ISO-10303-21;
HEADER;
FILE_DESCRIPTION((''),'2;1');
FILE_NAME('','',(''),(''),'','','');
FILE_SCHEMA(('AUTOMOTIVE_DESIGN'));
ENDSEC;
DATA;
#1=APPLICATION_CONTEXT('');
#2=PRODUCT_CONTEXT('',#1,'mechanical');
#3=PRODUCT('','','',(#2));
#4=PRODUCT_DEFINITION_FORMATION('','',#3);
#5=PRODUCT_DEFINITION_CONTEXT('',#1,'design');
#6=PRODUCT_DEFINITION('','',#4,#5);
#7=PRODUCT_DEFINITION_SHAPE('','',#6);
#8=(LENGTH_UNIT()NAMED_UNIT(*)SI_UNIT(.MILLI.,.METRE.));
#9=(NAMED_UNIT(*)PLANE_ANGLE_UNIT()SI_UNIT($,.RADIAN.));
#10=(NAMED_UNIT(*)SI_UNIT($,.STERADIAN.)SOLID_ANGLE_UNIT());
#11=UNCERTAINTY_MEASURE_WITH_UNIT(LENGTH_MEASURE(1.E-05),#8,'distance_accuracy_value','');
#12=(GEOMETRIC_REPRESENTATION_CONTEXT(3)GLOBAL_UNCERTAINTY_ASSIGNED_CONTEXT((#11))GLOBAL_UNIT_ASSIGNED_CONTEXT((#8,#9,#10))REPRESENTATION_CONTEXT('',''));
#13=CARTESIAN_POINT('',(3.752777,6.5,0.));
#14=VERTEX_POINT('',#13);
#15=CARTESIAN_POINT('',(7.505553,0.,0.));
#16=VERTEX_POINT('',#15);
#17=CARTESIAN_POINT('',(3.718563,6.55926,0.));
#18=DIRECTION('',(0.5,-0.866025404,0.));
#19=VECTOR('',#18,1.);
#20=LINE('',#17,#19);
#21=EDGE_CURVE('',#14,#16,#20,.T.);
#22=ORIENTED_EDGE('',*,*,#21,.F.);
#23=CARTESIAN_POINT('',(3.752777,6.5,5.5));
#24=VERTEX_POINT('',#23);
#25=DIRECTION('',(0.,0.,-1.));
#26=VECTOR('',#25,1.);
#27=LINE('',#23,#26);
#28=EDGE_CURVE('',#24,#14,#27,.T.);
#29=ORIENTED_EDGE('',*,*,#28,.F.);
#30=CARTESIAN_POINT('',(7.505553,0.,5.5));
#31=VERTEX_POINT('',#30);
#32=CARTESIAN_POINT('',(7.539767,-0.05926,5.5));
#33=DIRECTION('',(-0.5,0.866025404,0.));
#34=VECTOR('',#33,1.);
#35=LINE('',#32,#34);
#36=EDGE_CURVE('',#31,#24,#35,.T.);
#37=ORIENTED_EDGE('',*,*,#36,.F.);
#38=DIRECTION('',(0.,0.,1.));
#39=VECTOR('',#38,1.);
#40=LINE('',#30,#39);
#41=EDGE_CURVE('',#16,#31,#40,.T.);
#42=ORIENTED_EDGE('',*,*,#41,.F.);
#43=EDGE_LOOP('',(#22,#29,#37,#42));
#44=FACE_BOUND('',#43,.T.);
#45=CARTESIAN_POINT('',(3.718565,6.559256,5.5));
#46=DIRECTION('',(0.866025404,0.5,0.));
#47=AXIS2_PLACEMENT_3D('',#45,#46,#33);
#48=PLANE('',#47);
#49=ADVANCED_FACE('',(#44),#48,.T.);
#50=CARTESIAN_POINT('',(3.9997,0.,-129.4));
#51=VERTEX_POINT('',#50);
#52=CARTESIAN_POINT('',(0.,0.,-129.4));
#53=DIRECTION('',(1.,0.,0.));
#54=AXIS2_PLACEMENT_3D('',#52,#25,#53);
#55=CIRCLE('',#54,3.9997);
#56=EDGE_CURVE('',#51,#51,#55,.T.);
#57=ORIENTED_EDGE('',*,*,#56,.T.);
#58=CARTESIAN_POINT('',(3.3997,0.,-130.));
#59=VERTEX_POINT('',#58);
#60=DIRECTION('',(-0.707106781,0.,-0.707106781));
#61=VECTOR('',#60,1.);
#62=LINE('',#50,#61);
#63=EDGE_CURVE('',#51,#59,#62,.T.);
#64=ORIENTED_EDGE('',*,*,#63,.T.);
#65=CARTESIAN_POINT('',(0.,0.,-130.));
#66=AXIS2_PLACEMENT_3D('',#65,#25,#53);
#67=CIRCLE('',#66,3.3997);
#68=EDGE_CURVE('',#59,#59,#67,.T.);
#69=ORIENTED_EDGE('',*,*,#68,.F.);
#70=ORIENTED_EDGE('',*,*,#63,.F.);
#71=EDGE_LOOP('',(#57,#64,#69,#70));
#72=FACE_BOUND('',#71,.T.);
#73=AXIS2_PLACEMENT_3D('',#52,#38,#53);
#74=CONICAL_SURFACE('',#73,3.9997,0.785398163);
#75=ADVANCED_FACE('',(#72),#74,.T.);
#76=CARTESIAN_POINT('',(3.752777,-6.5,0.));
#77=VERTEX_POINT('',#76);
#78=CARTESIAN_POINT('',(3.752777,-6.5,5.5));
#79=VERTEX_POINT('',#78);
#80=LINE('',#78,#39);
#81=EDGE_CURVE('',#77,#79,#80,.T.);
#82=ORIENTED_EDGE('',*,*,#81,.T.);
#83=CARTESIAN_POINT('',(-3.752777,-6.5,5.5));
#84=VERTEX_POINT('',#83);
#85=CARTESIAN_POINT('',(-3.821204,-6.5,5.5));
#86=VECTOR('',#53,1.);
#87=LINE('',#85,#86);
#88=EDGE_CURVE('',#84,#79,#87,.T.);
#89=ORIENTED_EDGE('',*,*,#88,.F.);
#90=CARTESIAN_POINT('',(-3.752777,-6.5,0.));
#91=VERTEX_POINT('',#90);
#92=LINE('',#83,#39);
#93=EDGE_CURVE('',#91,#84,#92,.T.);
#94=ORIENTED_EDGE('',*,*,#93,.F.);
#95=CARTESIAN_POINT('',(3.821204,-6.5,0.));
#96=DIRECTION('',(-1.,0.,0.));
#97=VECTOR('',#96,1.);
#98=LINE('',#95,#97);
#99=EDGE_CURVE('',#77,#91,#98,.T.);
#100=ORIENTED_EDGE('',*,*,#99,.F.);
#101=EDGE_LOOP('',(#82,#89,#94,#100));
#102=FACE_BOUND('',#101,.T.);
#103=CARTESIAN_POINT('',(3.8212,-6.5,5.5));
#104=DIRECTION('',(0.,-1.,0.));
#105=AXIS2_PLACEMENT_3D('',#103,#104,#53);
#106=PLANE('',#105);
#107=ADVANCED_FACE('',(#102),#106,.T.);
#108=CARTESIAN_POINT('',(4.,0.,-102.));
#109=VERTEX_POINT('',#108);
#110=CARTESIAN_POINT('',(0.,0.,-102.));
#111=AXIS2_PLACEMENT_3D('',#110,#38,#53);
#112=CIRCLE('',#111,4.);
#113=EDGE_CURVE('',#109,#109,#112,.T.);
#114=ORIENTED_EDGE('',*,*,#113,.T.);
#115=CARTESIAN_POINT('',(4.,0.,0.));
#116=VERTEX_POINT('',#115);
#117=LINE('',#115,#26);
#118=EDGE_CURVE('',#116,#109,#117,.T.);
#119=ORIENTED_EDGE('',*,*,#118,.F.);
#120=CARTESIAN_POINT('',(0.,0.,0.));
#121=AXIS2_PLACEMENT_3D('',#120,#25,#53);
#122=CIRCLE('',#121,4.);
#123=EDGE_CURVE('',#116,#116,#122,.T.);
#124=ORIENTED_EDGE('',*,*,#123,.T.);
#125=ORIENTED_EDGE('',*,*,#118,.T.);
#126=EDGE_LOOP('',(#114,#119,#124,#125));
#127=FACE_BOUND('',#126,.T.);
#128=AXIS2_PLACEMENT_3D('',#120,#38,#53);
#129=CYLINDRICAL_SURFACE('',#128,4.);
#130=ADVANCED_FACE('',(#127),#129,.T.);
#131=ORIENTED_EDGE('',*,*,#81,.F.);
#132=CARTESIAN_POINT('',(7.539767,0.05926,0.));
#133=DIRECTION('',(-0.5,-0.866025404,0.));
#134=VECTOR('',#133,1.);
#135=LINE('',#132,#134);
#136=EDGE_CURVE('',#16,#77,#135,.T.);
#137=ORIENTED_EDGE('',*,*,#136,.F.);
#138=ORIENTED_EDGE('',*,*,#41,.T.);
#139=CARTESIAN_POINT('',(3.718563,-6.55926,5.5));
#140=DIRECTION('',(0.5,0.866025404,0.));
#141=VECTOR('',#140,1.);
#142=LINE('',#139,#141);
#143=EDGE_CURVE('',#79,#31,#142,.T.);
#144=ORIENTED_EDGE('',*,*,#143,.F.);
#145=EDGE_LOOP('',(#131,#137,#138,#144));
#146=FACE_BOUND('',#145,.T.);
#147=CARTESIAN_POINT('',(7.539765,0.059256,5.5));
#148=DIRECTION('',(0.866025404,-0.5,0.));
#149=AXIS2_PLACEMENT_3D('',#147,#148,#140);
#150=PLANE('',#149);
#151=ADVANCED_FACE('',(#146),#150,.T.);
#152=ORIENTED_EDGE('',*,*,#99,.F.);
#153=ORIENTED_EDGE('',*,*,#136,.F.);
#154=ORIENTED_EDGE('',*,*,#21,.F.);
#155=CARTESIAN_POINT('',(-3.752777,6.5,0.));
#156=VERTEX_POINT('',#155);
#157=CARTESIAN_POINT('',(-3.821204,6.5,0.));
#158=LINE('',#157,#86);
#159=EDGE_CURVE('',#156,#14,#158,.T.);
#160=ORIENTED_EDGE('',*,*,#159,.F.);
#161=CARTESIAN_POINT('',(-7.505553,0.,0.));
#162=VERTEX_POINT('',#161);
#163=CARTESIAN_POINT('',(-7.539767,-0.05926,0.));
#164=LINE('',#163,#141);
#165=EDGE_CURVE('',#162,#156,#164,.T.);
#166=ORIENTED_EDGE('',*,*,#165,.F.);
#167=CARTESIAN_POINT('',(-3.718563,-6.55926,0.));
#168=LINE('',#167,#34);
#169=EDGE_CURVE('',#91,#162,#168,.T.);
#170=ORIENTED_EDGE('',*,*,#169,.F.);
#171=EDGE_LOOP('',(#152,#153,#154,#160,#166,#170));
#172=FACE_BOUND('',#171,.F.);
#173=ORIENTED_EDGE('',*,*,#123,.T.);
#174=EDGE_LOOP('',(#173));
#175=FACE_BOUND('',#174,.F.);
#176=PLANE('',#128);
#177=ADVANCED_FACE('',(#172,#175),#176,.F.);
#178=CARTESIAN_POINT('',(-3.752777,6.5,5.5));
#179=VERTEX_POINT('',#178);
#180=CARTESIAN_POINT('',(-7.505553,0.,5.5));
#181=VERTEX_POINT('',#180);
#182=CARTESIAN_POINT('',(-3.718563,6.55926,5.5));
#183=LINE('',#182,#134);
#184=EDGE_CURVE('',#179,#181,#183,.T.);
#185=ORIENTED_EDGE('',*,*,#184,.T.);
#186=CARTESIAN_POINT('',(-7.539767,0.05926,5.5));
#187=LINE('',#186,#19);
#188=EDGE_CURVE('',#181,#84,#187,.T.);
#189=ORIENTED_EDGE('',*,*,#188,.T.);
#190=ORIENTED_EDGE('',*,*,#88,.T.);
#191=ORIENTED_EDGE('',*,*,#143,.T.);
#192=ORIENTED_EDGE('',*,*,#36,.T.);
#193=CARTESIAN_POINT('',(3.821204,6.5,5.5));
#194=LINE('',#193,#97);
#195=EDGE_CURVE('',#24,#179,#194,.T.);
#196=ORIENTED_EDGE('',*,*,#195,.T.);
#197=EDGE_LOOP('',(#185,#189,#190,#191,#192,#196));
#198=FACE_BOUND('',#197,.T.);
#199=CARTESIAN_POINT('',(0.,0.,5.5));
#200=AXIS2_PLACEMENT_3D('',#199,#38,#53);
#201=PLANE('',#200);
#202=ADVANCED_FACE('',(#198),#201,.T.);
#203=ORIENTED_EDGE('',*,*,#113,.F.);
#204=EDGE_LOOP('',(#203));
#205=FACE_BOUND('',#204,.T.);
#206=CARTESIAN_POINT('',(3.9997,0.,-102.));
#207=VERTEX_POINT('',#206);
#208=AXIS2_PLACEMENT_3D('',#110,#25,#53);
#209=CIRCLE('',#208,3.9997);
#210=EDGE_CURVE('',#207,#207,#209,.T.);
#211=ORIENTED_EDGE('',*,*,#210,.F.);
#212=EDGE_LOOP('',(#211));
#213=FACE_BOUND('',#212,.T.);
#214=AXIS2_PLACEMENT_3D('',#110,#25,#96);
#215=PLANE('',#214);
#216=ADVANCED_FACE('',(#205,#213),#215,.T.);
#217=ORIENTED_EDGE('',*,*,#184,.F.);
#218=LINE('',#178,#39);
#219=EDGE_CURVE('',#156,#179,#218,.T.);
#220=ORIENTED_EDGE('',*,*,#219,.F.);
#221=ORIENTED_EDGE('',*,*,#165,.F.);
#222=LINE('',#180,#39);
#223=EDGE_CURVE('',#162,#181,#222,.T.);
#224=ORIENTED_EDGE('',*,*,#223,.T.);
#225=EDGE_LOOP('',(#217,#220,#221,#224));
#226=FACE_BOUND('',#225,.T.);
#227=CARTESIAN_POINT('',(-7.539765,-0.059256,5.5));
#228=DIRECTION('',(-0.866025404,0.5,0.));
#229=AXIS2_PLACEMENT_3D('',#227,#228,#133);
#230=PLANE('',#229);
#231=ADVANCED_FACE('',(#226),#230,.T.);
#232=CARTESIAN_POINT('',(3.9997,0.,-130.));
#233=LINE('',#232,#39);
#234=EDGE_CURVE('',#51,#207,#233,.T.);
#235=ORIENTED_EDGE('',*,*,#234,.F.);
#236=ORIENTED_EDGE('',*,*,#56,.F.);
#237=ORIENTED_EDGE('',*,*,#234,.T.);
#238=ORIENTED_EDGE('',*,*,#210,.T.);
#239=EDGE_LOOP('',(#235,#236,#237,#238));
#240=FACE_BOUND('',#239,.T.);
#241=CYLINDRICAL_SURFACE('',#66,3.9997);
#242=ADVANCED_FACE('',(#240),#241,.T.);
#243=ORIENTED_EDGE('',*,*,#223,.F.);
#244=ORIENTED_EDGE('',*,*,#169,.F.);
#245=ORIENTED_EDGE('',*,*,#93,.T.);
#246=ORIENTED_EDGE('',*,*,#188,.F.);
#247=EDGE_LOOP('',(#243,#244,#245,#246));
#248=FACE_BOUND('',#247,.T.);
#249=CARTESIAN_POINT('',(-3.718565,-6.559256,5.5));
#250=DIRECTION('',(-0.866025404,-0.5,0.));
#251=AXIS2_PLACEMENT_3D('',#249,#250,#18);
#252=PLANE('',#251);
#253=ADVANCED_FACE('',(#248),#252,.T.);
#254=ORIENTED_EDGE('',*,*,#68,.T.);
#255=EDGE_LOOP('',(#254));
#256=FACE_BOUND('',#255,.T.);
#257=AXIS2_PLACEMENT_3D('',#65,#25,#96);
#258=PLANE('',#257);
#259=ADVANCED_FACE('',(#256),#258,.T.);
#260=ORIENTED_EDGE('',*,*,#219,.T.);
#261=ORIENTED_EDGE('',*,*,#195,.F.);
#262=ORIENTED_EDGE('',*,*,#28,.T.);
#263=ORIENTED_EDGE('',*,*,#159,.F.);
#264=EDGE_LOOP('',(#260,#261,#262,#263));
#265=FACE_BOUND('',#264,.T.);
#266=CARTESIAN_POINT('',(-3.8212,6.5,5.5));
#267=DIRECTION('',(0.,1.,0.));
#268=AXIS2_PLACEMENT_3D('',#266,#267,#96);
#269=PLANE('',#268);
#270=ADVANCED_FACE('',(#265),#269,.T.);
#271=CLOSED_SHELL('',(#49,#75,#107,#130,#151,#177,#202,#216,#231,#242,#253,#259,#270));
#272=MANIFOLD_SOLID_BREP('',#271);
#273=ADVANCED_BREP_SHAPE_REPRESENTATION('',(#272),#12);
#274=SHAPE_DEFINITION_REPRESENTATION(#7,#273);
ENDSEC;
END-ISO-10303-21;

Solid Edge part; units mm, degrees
sketch "Sketch1" plane through (0, 0, 0) normal (0, 0, 1) x (1, 0, 0)
  circle A0 centre (0, 0) radius 7.54
extrude "Protrusion1" add sketch "Sketch1" along normal blind 5.5
sketch "Sketch2" plane through (0, 0, 0) normal (0, 0, -1) x (1, 0, 0)
  circle A0 centre (0, 0) radius 4
extrude "Protrusion2" add sketch "Sketch2" along normal blind 130
sketch "Sketch3" plane through (0, 0, -130) normal (0, 0, -1) x (1, 0, 0)
  circle A0 centre (0, 0) radius 3.9997
extrude "Cutout1" cut sketch "Sketch3" against normal blind 28 flip side to cut
chamfer "Chamfer_1" distance 0.6 angle 45 1 edges at (-3.9997, 0, -130)
sketch "Sketch4" plane through (0, 0, 5.5) normal (0, 0, 1) x (1, 0, 0)
  line L0 (-3.8212, 6.5) -> (3.8212, 6.5)
extrude "Cutout2" cut sketch "Sketch4" against normal up to next material side at (0, 6.55, 5.5)
pattern_circular "Pattern1" count 6 over 360 about axis through (0, 0, 5.5) along (0, 0, 1) of "Cutout2"
properties part number "300107"
